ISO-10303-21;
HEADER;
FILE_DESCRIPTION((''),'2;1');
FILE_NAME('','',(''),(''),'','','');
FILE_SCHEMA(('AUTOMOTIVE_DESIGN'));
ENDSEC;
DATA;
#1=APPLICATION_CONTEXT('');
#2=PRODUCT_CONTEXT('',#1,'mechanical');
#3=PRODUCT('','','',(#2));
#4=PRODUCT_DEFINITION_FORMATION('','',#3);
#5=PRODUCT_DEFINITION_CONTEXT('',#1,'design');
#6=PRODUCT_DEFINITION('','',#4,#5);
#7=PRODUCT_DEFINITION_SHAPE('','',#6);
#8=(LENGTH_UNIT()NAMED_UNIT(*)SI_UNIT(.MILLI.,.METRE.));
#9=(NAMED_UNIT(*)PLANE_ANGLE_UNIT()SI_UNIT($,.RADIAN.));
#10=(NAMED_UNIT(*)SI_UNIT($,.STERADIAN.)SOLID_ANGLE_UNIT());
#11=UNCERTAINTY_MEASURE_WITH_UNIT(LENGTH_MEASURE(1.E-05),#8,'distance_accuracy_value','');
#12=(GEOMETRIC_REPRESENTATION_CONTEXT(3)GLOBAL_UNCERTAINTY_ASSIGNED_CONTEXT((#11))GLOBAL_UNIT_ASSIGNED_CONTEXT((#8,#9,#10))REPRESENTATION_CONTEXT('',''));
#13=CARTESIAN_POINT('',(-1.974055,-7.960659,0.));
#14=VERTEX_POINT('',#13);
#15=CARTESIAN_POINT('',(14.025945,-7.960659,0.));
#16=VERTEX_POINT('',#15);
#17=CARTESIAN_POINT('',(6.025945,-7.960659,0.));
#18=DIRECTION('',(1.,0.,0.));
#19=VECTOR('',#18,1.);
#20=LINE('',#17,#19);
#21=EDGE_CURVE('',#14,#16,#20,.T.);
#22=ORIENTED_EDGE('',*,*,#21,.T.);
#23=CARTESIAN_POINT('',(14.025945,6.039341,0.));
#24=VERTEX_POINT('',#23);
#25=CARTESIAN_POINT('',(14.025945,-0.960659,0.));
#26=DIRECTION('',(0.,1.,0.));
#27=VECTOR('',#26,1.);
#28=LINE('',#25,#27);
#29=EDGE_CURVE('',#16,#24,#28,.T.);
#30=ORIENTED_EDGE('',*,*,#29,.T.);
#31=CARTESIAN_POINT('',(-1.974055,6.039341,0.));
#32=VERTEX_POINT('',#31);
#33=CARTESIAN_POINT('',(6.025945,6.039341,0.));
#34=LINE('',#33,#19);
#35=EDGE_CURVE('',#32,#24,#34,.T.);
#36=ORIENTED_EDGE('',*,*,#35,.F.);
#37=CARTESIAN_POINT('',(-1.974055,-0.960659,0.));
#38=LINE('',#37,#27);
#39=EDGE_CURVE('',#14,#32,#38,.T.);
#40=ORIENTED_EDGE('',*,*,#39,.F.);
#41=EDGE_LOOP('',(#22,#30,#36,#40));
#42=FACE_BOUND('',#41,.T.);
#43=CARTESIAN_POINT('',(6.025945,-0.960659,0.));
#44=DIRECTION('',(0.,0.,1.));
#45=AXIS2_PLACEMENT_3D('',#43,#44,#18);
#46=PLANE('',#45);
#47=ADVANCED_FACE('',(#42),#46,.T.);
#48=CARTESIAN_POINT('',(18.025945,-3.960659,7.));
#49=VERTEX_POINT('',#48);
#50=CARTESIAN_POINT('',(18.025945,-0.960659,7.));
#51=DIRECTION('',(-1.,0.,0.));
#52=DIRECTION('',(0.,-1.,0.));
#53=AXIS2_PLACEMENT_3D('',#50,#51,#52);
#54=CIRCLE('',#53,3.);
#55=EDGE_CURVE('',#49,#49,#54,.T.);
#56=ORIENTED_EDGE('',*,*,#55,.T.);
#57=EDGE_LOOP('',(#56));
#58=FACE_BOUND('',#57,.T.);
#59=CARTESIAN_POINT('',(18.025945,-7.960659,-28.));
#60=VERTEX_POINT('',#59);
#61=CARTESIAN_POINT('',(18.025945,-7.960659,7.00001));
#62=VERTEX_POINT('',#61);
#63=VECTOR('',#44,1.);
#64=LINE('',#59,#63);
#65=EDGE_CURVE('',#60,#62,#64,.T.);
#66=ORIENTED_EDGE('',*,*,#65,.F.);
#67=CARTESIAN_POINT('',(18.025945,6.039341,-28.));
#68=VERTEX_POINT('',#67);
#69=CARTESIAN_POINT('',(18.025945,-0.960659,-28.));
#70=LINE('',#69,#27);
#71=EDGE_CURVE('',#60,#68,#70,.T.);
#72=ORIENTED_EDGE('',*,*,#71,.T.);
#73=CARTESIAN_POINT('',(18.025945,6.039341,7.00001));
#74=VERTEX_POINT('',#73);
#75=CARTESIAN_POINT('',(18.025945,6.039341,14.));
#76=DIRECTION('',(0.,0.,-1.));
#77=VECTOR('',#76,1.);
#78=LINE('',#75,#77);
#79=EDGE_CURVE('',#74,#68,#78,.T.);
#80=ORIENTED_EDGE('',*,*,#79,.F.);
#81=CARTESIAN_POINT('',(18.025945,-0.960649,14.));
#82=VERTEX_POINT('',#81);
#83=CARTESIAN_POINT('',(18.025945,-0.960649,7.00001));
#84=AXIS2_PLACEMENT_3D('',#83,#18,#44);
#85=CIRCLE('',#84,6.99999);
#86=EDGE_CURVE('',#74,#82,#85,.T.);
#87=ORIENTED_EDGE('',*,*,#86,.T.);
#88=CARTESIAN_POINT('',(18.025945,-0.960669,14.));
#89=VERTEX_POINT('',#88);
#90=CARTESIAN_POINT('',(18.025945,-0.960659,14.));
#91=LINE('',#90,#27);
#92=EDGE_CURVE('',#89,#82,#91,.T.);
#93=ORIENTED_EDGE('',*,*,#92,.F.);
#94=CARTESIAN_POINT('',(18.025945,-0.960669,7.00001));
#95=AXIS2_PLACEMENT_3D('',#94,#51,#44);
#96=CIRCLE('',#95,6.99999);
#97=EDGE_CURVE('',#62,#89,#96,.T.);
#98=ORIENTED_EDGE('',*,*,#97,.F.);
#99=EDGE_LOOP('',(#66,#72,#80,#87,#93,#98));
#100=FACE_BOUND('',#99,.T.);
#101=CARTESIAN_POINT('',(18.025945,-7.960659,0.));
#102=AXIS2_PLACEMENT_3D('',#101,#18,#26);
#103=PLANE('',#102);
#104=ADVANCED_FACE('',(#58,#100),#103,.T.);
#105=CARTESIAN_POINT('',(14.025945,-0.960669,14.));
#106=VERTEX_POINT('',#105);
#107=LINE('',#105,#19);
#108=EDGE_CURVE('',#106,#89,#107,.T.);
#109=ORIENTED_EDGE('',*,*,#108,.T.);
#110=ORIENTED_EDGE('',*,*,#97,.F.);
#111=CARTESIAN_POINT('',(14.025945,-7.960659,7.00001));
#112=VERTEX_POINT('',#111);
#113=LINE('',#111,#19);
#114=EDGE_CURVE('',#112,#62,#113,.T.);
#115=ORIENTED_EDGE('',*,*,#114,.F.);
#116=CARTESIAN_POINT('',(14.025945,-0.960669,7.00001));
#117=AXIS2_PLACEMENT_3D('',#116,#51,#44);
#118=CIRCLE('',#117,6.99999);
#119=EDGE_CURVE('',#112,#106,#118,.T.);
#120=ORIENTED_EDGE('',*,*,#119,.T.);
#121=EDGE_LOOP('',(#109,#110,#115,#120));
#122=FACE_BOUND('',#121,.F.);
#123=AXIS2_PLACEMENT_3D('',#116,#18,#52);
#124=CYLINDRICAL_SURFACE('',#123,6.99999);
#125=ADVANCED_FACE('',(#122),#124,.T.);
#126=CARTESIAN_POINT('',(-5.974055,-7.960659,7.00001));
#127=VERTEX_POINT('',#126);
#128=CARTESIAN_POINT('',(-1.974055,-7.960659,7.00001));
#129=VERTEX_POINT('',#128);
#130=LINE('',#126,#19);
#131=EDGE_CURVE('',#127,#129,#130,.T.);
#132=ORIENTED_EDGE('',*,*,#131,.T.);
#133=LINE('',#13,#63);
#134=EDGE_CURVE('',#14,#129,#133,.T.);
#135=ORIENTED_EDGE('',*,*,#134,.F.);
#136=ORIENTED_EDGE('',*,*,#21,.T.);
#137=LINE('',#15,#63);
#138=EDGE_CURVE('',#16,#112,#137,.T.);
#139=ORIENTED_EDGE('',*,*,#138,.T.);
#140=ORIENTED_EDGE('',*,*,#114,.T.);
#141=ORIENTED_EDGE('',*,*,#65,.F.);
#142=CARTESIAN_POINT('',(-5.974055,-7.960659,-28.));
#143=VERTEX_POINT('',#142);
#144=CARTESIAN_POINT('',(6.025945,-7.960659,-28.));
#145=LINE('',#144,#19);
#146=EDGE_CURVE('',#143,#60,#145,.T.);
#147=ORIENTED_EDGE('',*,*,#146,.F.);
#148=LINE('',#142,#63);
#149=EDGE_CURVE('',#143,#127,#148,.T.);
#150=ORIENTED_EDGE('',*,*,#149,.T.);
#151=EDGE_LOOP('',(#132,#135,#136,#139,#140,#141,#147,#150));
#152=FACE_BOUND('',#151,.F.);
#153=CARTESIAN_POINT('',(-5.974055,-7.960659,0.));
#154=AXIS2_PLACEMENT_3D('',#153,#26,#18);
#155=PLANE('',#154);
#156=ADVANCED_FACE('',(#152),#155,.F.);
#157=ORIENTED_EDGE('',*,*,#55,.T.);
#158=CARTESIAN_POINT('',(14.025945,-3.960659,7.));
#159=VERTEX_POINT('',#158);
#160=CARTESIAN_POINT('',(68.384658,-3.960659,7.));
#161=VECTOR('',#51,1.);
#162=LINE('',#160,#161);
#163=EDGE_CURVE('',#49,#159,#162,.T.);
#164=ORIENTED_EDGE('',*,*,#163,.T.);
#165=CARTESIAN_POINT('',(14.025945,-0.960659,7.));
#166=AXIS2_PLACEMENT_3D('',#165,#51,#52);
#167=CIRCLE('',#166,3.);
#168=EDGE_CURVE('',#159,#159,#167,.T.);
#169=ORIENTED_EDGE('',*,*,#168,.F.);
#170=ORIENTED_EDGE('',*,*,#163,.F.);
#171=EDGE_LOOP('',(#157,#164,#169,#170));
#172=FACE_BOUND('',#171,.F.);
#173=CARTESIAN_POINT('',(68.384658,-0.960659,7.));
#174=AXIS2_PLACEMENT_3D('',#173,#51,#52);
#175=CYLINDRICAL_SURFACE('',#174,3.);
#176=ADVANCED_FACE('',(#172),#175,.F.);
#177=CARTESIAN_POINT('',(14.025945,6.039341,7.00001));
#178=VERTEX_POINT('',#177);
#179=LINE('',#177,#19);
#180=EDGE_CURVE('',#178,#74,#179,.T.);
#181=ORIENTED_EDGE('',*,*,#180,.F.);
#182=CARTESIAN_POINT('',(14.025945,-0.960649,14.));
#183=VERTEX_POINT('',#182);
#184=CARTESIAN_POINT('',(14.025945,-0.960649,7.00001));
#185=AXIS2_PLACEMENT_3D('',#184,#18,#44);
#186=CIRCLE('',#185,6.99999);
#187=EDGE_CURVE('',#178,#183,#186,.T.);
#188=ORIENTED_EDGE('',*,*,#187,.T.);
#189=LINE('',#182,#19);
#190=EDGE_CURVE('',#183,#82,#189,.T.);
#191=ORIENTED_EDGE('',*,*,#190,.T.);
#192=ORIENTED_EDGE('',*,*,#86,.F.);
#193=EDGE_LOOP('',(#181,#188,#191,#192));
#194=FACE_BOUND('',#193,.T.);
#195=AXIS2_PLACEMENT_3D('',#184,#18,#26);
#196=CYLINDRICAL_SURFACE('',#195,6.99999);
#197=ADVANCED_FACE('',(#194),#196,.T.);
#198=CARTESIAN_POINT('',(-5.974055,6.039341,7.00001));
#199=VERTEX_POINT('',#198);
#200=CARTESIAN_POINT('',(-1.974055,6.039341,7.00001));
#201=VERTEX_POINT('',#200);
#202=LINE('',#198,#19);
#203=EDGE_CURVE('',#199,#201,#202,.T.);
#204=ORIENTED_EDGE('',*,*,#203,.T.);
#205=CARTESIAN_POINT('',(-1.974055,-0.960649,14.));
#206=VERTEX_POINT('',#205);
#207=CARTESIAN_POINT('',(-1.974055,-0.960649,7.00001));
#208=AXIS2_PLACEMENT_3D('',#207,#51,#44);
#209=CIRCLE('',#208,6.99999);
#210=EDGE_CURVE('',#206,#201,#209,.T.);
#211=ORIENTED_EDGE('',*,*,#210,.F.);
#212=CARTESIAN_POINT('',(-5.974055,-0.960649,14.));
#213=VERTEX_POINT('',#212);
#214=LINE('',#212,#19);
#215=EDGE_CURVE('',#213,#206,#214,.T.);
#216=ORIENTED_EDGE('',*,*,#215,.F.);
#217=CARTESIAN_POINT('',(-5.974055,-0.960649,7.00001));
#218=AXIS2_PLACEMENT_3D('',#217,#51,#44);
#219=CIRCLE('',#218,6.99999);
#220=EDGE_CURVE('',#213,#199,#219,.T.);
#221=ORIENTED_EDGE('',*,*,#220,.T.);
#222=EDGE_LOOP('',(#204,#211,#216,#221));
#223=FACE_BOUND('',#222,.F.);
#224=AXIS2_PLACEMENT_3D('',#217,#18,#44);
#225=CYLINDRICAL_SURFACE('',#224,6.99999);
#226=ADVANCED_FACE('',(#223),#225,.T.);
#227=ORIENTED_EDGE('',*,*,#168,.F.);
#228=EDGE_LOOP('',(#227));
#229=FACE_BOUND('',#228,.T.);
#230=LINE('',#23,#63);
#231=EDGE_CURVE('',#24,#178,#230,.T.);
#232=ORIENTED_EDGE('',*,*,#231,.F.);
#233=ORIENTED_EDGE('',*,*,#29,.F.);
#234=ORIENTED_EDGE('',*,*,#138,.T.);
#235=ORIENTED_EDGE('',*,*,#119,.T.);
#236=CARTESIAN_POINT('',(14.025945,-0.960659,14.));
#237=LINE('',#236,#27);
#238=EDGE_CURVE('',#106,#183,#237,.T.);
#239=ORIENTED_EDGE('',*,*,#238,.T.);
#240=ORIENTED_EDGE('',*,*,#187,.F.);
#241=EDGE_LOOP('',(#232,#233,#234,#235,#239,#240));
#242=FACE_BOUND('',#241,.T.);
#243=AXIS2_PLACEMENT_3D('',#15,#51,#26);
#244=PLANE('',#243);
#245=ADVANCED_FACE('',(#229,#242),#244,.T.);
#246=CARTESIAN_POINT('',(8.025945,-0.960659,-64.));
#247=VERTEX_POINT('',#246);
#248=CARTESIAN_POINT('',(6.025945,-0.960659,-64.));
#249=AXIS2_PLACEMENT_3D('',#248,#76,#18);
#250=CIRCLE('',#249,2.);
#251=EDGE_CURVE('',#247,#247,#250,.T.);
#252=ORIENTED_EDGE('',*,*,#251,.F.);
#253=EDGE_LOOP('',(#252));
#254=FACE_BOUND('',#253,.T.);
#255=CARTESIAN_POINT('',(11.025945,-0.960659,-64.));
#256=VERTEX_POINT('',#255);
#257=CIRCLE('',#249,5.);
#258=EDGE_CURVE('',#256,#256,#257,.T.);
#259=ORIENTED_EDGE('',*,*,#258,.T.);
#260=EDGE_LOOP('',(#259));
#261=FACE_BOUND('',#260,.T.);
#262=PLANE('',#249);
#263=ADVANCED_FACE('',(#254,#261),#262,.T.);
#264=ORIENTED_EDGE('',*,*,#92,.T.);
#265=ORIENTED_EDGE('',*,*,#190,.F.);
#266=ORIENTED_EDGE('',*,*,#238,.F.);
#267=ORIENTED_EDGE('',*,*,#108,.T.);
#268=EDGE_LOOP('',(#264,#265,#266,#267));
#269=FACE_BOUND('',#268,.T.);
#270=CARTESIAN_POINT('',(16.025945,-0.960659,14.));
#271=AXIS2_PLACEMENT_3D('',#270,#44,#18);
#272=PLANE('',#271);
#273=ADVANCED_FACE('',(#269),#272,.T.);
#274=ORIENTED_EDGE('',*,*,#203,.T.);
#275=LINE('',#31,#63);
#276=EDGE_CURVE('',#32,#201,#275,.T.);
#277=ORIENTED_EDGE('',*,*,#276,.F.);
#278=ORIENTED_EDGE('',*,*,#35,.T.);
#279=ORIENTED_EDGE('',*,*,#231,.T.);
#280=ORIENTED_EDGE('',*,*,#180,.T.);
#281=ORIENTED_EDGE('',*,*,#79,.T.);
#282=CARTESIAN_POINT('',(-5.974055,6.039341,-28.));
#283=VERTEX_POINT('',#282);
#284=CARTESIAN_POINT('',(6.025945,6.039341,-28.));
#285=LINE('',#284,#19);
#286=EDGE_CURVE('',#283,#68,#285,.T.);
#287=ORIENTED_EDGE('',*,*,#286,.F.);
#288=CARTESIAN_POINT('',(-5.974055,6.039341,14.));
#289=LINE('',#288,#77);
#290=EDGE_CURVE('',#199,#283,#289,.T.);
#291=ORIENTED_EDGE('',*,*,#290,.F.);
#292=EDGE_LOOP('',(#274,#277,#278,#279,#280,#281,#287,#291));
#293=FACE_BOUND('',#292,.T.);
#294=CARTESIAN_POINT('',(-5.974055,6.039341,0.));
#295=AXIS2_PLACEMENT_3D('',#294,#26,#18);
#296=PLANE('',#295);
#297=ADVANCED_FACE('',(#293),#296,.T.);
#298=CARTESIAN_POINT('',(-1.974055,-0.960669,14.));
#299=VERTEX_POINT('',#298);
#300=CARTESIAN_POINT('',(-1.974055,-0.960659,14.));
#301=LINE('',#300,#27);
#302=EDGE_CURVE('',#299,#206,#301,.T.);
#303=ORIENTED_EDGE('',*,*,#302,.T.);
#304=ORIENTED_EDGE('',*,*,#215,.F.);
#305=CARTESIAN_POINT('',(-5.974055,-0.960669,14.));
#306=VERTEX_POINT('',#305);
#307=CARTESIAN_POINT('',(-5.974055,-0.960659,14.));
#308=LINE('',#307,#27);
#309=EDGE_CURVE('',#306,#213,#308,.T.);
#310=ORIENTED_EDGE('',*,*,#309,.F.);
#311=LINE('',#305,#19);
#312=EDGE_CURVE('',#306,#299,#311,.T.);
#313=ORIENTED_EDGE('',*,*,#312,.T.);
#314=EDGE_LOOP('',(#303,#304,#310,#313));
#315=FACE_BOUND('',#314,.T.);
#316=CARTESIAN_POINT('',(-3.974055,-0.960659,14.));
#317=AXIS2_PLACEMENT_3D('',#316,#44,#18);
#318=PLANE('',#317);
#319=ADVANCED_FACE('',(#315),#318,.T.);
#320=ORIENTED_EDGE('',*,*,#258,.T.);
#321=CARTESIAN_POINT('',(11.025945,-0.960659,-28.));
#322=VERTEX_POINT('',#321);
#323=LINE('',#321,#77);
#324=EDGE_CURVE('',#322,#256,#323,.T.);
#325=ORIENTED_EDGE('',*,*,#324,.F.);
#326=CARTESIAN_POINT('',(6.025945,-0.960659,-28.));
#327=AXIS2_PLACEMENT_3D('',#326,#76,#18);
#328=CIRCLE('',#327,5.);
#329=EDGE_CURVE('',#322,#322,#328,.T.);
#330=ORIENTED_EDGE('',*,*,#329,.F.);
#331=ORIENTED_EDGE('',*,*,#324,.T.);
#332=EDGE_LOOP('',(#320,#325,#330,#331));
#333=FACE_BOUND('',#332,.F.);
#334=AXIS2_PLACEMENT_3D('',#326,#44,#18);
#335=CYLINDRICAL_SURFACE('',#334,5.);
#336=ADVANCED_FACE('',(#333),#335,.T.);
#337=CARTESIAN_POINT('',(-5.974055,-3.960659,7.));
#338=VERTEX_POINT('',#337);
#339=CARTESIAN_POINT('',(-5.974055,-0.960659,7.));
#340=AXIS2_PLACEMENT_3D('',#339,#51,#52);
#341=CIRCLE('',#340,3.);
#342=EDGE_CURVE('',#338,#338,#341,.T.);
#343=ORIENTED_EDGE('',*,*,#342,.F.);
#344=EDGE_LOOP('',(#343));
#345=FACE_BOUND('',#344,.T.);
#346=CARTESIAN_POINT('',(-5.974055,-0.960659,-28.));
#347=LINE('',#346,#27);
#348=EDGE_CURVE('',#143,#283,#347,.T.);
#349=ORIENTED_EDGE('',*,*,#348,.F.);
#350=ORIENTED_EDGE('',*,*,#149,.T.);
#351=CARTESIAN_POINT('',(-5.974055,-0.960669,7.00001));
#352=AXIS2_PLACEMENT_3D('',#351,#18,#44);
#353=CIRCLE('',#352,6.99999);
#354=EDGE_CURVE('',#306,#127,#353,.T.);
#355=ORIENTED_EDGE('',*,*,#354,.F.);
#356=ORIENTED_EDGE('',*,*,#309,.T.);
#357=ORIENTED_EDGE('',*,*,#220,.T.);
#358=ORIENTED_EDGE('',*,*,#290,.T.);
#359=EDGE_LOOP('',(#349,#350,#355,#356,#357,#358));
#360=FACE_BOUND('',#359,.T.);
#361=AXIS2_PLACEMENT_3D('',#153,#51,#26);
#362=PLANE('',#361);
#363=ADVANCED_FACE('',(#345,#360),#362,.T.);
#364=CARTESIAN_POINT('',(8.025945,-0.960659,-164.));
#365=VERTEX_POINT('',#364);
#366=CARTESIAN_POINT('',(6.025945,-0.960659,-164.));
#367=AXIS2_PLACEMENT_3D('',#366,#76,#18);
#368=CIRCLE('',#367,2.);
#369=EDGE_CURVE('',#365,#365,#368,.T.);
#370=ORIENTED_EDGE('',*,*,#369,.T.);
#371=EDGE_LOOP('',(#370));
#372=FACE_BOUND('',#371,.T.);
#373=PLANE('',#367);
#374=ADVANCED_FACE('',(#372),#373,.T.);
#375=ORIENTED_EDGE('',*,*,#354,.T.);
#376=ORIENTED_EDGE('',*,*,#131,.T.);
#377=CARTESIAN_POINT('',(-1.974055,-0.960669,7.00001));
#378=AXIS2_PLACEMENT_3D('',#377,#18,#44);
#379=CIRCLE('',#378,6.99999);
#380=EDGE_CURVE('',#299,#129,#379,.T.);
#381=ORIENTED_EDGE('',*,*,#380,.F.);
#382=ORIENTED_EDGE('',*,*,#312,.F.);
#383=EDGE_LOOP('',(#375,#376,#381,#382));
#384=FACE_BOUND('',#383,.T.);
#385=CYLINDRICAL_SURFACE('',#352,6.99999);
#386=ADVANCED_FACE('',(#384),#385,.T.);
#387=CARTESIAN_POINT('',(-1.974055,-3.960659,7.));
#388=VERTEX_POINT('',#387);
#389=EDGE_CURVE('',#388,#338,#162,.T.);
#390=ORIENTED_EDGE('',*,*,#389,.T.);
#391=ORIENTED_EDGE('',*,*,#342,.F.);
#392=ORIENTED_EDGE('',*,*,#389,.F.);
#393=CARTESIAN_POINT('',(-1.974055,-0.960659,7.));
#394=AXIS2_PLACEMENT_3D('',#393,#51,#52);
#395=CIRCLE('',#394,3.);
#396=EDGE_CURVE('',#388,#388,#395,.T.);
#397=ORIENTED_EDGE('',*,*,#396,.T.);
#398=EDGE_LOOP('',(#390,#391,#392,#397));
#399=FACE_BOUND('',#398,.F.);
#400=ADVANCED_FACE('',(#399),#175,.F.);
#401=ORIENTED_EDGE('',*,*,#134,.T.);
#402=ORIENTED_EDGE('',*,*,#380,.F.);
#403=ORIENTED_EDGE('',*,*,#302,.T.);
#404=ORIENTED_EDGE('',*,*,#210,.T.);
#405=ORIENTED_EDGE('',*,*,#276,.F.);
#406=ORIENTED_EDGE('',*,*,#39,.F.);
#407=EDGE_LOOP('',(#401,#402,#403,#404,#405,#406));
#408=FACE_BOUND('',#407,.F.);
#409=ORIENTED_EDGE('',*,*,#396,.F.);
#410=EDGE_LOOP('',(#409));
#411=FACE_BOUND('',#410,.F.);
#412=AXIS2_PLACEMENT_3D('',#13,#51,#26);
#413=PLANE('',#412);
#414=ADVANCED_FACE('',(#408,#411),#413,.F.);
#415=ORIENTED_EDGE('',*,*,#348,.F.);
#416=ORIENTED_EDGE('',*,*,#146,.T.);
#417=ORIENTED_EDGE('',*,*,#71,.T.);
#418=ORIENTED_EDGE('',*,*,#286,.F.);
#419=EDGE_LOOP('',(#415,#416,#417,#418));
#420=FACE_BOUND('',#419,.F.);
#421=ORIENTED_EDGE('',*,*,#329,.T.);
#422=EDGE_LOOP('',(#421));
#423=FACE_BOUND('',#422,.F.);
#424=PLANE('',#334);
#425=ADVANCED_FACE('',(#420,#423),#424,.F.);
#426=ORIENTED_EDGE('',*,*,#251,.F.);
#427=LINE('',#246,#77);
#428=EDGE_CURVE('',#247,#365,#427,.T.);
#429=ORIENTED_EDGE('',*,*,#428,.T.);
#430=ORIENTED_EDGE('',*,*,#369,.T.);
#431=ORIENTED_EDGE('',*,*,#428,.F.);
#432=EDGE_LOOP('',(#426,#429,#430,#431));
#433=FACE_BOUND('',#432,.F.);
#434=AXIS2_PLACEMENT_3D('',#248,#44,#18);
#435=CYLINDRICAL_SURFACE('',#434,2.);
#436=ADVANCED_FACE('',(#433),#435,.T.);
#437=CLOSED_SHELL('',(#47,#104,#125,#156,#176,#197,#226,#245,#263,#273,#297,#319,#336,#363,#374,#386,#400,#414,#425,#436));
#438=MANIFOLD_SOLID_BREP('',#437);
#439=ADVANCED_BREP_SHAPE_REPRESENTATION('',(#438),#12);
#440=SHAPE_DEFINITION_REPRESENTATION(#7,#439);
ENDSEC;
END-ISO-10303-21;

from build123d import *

# Parameters (mm, degrees)
F0_W      = 24
F0_H      = 14
F1_DEPTH  = 28
F2_W      = 4
F2_H      = 14
F3_DEPTH  = 14
F5_D      = 6
F6_R      = 6.99999
F7_R      = 5
F8_DEPTH  = 36
F9_R      = 2
F10_DEPTH = 100


# Not quite as in the source:
# - a fillet or chamfer is up to 0.001 mm smaller than in the source, because OpenCascade refuses the exact size


with BuildPart() as f1:
    # F0 (on Top) → F1 (new body)
    with BuildSketch(Plane.XY):
        with Locations((6.0259448364, -0.9606586885)):
            Rectangle(F0_W, F0_H)
    extrude(amount=-F1_DEPTH)

    # F2 (on face) → F3 (join)
    with BuildSketch(Plane.XY):
        with Locations((-3.9740551636, -0.9606586885)):
            Rectangle(F2_W, F2_H)
        with Locations((16.0259448364, -0.9606586885)):
            Rectangle(F2_W, F2_H)
    extrude(amount=F3_DEPTH)

    # F5 (through all)
    with Locations(Plane.YZ.offset(18.0259448364)):
        with Locations((-0.9606586885, 7)):
            Hole(F5_D / 2)

    # F6 (radius 7 in the source; OpenCascade refuses exactly that, so slightly less here)
    f6_edges = [f1.edges().sort_by_distance(p)[0] for p in [
        (16.025945, -7.960659, 14),
        (16.025945, 6.039341, 14),
        (-3.974055, 6.039341, 14),
        (-3.974055, -7.960659, 14),
    ]]
    fillet(f6_edges, radius=F6_R)

    # F7 (on face) → F8 (join)
    with BuildSketch(Plane(origin=(0, 0, -28), x_dir=(1, 0, 0), z_dir=(0, 0, -1))):
        with Locations((6.0259448364, 0.9606586885)):
            Circle(F7_R)
    extrude(amount=F8_DEPTH)

    # F9 (on face) → F10 (join)
    with BuildSketch(Plane(origin=(0, 0, -64), x_dir=(1, 0, 0), z_dir=(0, 0, -1))):
        with Locations((6.0259448364, 0.9606586885)):
            Circle(F9_R)
    extrude(amount=F10_DEPTH)


solid = f1.part
